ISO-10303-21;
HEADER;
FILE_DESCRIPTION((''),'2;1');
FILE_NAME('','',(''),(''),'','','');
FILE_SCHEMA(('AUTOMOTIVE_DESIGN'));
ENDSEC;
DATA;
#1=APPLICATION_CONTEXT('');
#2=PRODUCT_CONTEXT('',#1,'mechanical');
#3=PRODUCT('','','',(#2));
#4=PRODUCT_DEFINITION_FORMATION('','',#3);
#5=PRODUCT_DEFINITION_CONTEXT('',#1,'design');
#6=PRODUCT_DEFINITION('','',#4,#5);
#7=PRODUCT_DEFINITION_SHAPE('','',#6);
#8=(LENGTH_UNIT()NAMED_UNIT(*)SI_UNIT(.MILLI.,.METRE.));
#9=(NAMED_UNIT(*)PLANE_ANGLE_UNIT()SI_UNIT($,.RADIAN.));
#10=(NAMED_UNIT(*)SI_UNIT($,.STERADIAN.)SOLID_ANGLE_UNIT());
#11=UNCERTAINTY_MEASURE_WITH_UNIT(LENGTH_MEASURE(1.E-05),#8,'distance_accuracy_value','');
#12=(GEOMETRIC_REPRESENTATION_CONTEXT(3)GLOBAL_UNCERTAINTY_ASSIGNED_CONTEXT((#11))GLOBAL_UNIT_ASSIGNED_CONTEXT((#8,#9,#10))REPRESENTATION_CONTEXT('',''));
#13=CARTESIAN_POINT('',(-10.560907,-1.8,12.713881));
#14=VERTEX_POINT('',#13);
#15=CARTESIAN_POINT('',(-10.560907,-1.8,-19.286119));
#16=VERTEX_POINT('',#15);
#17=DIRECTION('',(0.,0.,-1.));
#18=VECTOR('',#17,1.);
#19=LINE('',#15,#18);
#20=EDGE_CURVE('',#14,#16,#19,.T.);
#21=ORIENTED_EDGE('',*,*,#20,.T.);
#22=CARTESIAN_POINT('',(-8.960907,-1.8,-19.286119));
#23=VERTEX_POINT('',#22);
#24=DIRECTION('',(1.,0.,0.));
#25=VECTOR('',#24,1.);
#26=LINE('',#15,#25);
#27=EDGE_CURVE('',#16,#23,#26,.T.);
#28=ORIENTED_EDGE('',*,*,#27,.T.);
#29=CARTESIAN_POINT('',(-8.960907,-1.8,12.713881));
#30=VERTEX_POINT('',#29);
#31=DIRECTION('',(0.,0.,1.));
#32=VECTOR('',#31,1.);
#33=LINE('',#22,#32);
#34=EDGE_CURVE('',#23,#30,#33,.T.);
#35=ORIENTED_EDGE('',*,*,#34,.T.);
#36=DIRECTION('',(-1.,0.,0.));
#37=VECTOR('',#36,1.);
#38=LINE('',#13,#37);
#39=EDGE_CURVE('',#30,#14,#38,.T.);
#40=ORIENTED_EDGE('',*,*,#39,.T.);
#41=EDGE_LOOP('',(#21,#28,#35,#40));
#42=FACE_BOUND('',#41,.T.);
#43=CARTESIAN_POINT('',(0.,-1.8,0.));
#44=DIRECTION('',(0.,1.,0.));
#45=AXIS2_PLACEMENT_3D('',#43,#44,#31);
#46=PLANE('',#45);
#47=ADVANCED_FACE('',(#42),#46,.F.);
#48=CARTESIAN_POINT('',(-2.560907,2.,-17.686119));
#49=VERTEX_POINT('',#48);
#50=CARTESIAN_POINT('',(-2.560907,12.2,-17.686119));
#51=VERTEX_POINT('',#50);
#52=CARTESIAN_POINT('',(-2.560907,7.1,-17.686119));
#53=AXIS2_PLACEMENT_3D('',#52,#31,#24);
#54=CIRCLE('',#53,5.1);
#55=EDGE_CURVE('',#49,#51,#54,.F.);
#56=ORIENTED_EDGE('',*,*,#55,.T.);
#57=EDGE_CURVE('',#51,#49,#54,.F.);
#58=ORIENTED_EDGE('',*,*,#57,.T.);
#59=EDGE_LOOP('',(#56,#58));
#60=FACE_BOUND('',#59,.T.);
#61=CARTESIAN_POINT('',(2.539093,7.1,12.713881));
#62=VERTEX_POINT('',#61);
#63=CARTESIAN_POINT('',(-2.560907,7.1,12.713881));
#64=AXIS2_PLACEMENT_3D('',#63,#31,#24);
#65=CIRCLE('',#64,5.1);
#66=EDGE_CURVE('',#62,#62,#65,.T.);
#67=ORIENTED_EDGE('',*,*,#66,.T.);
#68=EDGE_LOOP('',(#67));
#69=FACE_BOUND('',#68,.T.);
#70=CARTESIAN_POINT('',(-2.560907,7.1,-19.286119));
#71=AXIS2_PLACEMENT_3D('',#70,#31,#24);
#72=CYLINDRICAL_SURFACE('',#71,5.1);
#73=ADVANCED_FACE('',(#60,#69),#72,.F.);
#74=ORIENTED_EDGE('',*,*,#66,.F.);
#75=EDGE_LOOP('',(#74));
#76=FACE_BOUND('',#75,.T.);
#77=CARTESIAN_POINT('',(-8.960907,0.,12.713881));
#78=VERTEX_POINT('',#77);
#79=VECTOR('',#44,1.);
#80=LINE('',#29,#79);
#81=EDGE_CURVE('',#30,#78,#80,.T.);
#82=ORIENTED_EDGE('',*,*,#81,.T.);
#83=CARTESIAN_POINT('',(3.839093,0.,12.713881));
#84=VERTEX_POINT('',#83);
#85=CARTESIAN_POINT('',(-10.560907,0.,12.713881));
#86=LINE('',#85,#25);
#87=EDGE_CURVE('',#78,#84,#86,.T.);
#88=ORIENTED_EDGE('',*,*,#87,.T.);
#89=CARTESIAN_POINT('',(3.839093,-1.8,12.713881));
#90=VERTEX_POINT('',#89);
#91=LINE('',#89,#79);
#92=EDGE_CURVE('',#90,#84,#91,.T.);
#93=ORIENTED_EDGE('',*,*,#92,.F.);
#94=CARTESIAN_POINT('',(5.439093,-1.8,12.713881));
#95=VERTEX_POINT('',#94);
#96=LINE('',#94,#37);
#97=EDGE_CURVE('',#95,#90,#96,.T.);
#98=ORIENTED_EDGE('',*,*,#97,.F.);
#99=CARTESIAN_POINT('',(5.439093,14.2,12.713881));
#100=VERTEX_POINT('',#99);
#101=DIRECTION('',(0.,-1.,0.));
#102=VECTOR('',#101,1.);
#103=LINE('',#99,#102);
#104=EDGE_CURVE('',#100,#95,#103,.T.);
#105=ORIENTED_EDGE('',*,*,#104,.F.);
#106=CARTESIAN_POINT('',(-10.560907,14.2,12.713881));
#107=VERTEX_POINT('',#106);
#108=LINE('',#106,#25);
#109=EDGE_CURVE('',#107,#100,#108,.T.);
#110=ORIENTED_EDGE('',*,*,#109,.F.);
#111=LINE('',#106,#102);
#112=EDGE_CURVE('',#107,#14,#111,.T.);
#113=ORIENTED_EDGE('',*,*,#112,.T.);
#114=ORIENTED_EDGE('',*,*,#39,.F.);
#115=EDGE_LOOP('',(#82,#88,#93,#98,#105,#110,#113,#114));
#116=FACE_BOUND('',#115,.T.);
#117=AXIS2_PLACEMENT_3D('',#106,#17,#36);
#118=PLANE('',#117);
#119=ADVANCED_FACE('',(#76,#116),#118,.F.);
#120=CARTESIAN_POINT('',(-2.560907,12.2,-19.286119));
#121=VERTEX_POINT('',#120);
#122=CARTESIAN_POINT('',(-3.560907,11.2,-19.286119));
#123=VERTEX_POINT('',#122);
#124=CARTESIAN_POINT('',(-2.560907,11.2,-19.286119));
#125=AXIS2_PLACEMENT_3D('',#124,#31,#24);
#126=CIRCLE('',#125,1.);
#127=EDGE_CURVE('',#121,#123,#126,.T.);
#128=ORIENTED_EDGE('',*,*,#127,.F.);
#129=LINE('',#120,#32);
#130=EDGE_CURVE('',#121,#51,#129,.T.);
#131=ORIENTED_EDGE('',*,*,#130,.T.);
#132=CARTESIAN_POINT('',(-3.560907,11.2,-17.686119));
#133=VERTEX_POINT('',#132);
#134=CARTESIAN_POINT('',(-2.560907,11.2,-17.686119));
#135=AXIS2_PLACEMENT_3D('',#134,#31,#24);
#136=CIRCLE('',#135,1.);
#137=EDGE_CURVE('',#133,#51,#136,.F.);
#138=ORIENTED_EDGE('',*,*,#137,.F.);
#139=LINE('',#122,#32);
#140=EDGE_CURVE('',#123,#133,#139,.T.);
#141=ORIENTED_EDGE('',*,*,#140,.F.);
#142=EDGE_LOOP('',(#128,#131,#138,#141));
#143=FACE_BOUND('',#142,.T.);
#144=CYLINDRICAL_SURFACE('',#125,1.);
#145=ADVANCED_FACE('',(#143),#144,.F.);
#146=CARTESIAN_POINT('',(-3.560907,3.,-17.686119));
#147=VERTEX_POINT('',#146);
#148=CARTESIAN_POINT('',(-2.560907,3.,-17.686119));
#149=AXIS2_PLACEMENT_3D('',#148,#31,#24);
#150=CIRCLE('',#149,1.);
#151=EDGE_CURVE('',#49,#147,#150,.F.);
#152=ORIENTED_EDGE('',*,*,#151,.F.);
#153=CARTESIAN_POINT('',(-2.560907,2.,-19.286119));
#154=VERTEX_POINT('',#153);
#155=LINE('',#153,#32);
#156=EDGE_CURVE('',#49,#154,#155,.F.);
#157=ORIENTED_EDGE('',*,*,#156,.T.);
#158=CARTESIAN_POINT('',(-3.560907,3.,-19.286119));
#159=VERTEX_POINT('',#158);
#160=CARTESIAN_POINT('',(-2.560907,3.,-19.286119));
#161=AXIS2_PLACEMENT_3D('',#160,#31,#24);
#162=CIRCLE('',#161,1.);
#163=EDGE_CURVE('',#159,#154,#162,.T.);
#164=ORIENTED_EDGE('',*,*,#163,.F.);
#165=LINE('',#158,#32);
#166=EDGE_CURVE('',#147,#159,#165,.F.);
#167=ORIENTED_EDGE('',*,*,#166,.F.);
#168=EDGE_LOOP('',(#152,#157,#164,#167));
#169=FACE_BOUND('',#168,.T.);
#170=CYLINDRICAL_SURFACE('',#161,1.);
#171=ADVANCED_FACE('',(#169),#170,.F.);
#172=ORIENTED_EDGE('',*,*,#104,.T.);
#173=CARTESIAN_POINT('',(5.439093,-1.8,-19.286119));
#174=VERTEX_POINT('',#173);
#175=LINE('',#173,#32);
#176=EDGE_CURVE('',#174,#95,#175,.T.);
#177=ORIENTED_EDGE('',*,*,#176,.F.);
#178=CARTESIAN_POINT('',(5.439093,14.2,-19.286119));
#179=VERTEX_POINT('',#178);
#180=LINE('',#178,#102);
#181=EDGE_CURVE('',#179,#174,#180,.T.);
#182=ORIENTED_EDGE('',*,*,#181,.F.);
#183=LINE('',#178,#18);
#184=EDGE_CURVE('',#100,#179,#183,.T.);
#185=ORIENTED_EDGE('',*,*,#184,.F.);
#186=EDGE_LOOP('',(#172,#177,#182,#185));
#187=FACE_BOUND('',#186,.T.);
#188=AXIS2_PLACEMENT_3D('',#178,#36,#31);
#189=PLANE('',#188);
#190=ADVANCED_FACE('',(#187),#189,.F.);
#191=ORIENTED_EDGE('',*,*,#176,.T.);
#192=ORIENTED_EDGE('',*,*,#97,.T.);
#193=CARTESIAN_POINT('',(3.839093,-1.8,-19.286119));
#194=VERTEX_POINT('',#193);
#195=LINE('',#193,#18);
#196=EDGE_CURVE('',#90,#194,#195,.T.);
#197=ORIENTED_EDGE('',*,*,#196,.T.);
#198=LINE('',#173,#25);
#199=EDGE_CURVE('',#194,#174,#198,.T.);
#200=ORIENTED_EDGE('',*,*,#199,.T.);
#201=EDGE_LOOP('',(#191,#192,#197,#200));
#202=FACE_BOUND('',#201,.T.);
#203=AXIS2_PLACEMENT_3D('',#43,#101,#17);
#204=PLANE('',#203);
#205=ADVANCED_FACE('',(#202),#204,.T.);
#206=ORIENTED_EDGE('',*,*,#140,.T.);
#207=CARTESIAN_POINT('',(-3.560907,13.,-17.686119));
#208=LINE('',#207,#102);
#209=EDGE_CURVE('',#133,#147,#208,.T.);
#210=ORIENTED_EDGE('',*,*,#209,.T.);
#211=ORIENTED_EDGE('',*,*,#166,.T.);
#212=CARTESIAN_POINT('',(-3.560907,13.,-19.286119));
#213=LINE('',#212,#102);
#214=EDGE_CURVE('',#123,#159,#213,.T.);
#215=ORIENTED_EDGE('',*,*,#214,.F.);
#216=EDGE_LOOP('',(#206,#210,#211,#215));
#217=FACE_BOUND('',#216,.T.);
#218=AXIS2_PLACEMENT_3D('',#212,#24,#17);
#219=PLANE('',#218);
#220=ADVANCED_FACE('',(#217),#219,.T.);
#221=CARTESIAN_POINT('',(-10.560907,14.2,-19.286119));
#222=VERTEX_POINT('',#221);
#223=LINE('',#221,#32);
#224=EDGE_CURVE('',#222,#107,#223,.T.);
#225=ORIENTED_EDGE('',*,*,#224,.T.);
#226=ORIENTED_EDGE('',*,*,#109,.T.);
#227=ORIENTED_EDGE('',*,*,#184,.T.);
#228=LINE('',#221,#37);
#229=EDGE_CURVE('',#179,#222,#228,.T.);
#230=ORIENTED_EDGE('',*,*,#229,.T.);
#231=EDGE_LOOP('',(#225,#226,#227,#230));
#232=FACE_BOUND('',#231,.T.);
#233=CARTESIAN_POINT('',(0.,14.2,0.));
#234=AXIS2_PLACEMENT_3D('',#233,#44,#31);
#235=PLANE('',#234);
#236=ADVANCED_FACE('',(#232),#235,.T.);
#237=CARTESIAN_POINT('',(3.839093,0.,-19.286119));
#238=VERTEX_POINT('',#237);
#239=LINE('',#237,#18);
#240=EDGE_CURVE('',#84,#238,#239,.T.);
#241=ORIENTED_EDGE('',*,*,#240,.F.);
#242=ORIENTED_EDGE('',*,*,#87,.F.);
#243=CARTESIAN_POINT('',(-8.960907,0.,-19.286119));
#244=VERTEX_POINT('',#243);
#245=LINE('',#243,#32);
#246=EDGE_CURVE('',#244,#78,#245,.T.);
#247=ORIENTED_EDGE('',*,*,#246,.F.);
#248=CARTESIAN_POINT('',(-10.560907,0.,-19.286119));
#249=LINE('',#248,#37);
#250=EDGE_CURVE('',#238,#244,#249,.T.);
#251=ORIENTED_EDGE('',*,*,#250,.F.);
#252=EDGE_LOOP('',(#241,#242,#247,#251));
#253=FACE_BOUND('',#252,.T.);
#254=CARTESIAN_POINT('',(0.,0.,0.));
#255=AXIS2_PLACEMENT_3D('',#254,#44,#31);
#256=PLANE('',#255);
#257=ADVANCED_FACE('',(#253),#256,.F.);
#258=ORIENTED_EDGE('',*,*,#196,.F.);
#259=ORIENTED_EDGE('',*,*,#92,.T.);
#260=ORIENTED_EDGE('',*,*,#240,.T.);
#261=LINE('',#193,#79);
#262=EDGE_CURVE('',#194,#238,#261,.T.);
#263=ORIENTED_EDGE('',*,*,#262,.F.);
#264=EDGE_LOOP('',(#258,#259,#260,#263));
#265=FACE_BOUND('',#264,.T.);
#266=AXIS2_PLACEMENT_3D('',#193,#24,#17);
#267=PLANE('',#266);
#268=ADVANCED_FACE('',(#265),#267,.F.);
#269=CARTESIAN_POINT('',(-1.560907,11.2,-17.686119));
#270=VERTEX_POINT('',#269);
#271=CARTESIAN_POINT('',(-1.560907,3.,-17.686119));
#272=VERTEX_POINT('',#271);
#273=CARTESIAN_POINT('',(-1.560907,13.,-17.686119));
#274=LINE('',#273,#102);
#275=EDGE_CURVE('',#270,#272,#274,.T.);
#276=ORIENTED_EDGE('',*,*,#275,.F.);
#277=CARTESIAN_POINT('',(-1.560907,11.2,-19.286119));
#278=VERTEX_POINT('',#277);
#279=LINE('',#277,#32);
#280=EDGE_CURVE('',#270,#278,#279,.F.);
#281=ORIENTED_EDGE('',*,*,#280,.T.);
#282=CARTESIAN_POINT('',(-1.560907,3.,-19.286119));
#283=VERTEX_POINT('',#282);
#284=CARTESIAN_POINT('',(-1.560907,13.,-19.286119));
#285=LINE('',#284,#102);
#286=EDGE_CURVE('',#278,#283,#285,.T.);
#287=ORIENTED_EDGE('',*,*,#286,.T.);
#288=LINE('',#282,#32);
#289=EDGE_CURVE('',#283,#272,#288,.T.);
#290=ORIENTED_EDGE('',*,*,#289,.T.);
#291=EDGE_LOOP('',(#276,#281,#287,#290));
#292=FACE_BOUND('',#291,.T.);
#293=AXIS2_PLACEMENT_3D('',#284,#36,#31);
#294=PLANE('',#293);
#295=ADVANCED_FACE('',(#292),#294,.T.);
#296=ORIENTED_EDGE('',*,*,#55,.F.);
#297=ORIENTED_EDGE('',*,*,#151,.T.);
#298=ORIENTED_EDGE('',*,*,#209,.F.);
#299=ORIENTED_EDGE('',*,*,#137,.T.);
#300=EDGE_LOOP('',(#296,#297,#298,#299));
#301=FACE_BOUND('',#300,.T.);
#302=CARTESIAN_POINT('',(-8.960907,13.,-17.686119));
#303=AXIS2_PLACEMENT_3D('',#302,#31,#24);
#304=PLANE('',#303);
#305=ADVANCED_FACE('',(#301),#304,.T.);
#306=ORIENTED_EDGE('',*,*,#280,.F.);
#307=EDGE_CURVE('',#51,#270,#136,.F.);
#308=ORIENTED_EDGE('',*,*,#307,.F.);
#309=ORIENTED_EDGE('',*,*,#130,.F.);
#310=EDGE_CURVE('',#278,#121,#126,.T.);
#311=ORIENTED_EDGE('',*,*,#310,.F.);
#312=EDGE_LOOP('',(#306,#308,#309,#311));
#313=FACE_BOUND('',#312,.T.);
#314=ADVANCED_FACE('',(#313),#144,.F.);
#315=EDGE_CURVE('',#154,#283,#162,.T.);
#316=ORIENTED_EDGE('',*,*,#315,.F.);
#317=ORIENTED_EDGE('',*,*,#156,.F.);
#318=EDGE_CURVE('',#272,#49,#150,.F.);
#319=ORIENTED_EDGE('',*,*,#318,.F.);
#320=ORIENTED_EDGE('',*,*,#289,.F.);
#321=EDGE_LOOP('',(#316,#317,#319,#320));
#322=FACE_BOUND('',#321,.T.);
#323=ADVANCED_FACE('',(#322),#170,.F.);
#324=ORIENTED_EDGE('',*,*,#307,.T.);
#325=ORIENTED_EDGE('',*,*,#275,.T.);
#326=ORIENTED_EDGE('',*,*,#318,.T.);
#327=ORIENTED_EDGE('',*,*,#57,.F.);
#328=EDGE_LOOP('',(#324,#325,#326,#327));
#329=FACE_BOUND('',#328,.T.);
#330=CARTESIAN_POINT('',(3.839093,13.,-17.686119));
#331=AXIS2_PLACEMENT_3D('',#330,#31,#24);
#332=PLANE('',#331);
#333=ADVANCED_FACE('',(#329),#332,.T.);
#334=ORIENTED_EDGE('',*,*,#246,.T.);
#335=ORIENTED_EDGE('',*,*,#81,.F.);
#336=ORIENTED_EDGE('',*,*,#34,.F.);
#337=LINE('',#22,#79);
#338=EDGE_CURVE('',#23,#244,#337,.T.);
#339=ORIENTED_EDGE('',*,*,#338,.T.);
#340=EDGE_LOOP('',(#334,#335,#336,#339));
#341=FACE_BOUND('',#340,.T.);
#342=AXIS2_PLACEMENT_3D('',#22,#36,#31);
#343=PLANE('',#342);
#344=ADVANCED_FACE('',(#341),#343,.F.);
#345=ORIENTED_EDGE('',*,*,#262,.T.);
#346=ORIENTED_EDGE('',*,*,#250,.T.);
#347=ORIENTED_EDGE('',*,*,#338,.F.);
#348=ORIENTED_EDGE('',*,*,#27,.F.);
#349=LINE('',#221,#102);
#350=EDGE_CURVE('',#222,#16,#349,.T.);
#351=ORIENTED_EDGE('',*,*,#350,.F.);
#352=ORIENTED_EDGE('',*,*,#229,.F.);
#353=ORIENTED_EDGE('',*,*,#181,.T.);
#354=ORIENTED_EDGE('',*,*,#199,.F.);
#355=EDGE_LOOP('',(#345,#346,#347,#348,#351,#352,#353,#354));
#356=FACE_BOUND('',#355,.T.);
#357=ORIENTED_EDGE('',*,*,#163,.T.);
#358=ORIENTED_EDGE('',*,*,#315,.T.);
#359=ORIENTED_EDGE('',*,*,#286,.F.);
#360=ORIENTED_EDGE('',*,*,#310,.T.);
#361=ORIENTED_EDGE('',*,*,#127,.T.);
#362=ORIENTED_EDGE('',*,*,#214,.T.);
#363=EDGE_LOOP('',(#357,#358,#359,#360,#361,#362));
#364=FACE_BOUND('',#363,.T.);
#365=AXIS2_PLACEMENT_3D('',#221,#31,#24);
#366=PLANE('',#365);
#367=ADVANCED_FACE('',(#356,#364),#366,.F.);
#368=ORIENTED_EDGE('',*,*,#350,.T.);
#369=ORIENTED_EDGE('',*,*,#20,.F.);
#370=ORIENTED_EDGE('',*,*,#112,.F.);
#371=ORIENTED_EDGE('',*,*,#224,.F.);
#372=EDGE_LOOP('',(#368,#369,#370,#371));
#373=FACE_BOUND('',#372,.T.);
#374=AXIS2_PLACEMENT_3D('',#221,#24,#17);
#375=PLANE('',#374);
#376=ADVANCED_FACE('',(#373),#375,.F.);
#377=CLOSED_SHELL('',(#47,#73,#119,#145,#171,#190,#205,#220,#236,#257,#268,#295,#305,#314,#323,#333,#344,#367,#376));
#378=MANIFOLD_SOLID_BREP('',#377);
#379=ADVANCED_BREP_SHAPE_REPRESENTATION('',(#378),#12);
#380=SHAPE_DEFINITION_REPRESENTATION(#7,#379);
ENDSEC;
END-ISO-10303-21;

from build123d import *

# Parameters (mm, degrees)
SKETCH1_W           = 16
SKETCH1_H           = 32
BOSS_EXTRUDE1_DEPTH = 14.2
SKETCH3_W           = 1.6
SKETCH3_H           = 32
BOSS_EXTRUDE2_DEPTH = 1.8
SKETCH4_R           = 5.1
CUT_EXTRUDE1_DEPTH  = 37.567372703
SKETCH5_W           = 5.4
SKETCH5_H           = 1.6
BOSS_EXTRUDE3_DEPTH = 13
FILLET1_R           = 1


with BuildPart() as part:
    # Sketch1 → Boss-Extrude1 (new body)
    with BuildSketch(Plane(origin=(0, 0, 0), x_dir=(1, 0, 0), z_dir=(0, 1, 0))):
        with Locations((-2.560906516, 3.28611898)):
            Rectangle(SKETCH1_W, SKETCH1_H)
    extrude(amount=BOSS_EXTRUDE1_DEPTH)

    # Sketch3 → Boss-Extrude2 (add)
    with BuildSketch(Plane.XZ):
        with Locations((-9.760906516, -3.28611898)):
            Rectangle(SKETCH3_W, SKETCH3_H)
        with Locations((4.639093484, -3.28611898)):
            Rectangle(SKETCH3_W, SKETCH3_H)
    extrude(amount=BOSS_EXTRUDE2_DEPTH)

    # Sketch4 → Cut-Extrude1 (cut, through all)
    with BuildSketch(Plane.XY.offset(12.71388102)):
        with Locations((-2.560906516, 7.1)):
            Circle(SKETCH4_R)
    extrude(amount=-CUT_EXTRUDE1_DEPTH, mode=Mode.SUBTRACT)

    # Sketch5 → Boss-Extrude3 (add)
    with BuildSketch(Plane.XZ):
        with Locations((1.139093484, -18.48611898)):
            Rectangle(SKETCH5_W, SKETCH5_H)
        with Locations((-6.260906516, -18.48611898)):
            Rectangle(SKETCH5_W, SKETCH5_H)
    extrude(amount=-BOSS_EXTRUDE3_DEPTH)

    # Fillet1
    fillet1_edges = [part.edges().sort_by_distance(p)[0] for p in [
        (-3.560906516, 12.1009999, -18.48611898),
        (-3.560906516, 2.0990001, -18.48611898),
        (-1.560906516, 12.1009999, -18.48611898),
        (-1.560906516, 2.0990001, -18.48611898),
    ]]
    fillet(fillet1_edges, radius=FILLET1_R - 0.0001)  # a hair under: the kernel refuses the full size


solid = part.part
